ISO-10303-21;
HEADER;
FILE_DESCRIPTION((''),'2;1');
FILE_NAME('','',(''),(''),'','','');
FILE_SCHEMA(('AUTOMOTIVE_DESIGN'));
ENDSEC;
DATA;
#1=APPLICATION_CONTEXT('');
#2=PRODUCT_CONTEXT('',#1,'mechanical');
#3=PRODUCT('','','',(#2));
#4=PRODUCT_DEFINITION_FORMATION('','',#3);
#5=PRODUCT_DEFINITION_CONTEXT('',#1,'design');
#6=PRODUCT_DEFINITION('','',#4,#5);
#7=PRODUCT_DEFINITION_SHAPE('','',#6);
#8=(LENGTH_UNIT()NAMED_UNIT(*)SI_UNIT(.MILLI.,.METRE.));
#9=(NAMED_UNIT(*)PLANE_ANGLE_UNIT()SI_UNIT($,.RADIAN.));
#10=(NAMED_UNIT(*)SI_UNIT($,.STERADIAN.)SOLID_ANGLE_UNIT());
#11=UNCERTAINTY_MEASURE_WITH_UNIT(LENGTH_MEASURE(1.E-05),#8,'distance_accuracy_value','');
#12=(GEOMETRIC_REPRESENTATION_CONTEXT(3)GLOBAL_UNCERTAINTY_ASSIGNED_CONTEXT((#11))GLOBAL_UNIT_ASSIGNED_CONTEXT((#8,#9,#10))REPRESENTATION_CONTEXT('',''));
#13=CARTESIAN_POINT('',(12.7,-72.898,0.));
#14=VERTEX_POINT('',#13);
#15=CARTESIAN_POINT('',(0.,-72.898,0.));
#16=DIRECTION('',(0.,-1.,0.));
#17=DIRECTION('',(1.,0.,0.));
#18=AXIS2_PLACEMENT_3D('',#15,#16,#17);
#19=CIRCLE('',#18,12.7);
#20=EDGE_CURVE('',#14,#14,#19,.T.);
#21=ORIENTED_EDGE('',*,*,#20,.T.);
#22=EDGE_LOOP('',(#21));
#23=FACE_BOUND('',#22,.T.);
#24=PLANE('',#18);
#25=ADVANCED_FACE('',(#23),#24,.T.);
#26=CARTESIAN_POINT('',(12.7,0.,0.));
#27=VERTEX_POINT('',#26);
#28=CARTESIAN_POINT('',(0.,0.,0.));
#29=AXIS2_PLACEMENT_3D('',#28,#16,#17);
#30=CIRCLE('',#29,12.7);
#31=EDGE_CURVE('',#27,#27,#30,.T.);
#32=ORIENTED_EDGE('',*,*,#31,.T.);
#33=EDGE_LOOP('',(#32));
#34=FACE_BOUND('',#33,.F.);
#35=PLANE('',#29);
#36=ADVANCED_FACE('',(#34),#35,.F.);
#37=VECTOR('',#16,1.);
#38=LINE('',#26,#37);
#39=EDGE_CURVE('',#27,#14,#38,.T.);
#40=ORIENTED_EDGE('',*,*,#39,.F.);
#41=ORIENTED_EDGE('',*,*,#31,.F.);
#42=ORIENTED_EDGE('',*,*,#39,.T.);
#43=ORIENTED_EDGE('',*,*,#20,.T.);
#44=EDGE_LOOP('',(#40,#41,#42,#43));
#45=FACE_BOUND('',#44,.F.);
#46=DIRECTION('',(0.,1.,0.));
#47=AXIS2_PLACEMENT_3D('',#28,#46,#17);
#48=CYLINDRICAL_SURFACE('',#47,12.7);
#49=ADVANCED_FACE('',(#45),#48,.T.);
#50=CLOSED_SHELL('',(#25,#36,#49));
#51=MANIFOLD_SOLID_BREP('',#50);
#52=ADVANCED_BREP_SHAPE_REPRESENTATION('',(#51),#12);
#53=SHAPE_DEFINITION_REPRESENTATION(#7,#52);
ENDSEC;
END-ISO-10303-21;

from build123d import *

# Parameters (mm, degrees)
F0_R     = 12.7
F1_DEPTH = 72.898
F4_R     = 7.62
F5_DEPTH = 127


# Not quite as in the source:
# - the program builds the solid bodies; features that only make, move or delete a surface that nothing else refers to are left out


with BuildPart() as f1:
    # F0 (on Front) → F1 (new body)
    with BuildSketch(Plane.XZ):
        Circle(F0_R)
    extrude(amount=F1_DEPTH)

    # F4 (on face) → F5 (cut)
    with BuildSketch(Plane(origin=(0, 0, 0), x_dir=(-1, 0, 0), z_dir=(0, 1, 0))):
        with Locations((0, -25.8763151404)):
            Circle(F4_R)
    extrude(amount=-F5_DEPTH, mode=Mode.SUBTRACT)


solid = f1.part
